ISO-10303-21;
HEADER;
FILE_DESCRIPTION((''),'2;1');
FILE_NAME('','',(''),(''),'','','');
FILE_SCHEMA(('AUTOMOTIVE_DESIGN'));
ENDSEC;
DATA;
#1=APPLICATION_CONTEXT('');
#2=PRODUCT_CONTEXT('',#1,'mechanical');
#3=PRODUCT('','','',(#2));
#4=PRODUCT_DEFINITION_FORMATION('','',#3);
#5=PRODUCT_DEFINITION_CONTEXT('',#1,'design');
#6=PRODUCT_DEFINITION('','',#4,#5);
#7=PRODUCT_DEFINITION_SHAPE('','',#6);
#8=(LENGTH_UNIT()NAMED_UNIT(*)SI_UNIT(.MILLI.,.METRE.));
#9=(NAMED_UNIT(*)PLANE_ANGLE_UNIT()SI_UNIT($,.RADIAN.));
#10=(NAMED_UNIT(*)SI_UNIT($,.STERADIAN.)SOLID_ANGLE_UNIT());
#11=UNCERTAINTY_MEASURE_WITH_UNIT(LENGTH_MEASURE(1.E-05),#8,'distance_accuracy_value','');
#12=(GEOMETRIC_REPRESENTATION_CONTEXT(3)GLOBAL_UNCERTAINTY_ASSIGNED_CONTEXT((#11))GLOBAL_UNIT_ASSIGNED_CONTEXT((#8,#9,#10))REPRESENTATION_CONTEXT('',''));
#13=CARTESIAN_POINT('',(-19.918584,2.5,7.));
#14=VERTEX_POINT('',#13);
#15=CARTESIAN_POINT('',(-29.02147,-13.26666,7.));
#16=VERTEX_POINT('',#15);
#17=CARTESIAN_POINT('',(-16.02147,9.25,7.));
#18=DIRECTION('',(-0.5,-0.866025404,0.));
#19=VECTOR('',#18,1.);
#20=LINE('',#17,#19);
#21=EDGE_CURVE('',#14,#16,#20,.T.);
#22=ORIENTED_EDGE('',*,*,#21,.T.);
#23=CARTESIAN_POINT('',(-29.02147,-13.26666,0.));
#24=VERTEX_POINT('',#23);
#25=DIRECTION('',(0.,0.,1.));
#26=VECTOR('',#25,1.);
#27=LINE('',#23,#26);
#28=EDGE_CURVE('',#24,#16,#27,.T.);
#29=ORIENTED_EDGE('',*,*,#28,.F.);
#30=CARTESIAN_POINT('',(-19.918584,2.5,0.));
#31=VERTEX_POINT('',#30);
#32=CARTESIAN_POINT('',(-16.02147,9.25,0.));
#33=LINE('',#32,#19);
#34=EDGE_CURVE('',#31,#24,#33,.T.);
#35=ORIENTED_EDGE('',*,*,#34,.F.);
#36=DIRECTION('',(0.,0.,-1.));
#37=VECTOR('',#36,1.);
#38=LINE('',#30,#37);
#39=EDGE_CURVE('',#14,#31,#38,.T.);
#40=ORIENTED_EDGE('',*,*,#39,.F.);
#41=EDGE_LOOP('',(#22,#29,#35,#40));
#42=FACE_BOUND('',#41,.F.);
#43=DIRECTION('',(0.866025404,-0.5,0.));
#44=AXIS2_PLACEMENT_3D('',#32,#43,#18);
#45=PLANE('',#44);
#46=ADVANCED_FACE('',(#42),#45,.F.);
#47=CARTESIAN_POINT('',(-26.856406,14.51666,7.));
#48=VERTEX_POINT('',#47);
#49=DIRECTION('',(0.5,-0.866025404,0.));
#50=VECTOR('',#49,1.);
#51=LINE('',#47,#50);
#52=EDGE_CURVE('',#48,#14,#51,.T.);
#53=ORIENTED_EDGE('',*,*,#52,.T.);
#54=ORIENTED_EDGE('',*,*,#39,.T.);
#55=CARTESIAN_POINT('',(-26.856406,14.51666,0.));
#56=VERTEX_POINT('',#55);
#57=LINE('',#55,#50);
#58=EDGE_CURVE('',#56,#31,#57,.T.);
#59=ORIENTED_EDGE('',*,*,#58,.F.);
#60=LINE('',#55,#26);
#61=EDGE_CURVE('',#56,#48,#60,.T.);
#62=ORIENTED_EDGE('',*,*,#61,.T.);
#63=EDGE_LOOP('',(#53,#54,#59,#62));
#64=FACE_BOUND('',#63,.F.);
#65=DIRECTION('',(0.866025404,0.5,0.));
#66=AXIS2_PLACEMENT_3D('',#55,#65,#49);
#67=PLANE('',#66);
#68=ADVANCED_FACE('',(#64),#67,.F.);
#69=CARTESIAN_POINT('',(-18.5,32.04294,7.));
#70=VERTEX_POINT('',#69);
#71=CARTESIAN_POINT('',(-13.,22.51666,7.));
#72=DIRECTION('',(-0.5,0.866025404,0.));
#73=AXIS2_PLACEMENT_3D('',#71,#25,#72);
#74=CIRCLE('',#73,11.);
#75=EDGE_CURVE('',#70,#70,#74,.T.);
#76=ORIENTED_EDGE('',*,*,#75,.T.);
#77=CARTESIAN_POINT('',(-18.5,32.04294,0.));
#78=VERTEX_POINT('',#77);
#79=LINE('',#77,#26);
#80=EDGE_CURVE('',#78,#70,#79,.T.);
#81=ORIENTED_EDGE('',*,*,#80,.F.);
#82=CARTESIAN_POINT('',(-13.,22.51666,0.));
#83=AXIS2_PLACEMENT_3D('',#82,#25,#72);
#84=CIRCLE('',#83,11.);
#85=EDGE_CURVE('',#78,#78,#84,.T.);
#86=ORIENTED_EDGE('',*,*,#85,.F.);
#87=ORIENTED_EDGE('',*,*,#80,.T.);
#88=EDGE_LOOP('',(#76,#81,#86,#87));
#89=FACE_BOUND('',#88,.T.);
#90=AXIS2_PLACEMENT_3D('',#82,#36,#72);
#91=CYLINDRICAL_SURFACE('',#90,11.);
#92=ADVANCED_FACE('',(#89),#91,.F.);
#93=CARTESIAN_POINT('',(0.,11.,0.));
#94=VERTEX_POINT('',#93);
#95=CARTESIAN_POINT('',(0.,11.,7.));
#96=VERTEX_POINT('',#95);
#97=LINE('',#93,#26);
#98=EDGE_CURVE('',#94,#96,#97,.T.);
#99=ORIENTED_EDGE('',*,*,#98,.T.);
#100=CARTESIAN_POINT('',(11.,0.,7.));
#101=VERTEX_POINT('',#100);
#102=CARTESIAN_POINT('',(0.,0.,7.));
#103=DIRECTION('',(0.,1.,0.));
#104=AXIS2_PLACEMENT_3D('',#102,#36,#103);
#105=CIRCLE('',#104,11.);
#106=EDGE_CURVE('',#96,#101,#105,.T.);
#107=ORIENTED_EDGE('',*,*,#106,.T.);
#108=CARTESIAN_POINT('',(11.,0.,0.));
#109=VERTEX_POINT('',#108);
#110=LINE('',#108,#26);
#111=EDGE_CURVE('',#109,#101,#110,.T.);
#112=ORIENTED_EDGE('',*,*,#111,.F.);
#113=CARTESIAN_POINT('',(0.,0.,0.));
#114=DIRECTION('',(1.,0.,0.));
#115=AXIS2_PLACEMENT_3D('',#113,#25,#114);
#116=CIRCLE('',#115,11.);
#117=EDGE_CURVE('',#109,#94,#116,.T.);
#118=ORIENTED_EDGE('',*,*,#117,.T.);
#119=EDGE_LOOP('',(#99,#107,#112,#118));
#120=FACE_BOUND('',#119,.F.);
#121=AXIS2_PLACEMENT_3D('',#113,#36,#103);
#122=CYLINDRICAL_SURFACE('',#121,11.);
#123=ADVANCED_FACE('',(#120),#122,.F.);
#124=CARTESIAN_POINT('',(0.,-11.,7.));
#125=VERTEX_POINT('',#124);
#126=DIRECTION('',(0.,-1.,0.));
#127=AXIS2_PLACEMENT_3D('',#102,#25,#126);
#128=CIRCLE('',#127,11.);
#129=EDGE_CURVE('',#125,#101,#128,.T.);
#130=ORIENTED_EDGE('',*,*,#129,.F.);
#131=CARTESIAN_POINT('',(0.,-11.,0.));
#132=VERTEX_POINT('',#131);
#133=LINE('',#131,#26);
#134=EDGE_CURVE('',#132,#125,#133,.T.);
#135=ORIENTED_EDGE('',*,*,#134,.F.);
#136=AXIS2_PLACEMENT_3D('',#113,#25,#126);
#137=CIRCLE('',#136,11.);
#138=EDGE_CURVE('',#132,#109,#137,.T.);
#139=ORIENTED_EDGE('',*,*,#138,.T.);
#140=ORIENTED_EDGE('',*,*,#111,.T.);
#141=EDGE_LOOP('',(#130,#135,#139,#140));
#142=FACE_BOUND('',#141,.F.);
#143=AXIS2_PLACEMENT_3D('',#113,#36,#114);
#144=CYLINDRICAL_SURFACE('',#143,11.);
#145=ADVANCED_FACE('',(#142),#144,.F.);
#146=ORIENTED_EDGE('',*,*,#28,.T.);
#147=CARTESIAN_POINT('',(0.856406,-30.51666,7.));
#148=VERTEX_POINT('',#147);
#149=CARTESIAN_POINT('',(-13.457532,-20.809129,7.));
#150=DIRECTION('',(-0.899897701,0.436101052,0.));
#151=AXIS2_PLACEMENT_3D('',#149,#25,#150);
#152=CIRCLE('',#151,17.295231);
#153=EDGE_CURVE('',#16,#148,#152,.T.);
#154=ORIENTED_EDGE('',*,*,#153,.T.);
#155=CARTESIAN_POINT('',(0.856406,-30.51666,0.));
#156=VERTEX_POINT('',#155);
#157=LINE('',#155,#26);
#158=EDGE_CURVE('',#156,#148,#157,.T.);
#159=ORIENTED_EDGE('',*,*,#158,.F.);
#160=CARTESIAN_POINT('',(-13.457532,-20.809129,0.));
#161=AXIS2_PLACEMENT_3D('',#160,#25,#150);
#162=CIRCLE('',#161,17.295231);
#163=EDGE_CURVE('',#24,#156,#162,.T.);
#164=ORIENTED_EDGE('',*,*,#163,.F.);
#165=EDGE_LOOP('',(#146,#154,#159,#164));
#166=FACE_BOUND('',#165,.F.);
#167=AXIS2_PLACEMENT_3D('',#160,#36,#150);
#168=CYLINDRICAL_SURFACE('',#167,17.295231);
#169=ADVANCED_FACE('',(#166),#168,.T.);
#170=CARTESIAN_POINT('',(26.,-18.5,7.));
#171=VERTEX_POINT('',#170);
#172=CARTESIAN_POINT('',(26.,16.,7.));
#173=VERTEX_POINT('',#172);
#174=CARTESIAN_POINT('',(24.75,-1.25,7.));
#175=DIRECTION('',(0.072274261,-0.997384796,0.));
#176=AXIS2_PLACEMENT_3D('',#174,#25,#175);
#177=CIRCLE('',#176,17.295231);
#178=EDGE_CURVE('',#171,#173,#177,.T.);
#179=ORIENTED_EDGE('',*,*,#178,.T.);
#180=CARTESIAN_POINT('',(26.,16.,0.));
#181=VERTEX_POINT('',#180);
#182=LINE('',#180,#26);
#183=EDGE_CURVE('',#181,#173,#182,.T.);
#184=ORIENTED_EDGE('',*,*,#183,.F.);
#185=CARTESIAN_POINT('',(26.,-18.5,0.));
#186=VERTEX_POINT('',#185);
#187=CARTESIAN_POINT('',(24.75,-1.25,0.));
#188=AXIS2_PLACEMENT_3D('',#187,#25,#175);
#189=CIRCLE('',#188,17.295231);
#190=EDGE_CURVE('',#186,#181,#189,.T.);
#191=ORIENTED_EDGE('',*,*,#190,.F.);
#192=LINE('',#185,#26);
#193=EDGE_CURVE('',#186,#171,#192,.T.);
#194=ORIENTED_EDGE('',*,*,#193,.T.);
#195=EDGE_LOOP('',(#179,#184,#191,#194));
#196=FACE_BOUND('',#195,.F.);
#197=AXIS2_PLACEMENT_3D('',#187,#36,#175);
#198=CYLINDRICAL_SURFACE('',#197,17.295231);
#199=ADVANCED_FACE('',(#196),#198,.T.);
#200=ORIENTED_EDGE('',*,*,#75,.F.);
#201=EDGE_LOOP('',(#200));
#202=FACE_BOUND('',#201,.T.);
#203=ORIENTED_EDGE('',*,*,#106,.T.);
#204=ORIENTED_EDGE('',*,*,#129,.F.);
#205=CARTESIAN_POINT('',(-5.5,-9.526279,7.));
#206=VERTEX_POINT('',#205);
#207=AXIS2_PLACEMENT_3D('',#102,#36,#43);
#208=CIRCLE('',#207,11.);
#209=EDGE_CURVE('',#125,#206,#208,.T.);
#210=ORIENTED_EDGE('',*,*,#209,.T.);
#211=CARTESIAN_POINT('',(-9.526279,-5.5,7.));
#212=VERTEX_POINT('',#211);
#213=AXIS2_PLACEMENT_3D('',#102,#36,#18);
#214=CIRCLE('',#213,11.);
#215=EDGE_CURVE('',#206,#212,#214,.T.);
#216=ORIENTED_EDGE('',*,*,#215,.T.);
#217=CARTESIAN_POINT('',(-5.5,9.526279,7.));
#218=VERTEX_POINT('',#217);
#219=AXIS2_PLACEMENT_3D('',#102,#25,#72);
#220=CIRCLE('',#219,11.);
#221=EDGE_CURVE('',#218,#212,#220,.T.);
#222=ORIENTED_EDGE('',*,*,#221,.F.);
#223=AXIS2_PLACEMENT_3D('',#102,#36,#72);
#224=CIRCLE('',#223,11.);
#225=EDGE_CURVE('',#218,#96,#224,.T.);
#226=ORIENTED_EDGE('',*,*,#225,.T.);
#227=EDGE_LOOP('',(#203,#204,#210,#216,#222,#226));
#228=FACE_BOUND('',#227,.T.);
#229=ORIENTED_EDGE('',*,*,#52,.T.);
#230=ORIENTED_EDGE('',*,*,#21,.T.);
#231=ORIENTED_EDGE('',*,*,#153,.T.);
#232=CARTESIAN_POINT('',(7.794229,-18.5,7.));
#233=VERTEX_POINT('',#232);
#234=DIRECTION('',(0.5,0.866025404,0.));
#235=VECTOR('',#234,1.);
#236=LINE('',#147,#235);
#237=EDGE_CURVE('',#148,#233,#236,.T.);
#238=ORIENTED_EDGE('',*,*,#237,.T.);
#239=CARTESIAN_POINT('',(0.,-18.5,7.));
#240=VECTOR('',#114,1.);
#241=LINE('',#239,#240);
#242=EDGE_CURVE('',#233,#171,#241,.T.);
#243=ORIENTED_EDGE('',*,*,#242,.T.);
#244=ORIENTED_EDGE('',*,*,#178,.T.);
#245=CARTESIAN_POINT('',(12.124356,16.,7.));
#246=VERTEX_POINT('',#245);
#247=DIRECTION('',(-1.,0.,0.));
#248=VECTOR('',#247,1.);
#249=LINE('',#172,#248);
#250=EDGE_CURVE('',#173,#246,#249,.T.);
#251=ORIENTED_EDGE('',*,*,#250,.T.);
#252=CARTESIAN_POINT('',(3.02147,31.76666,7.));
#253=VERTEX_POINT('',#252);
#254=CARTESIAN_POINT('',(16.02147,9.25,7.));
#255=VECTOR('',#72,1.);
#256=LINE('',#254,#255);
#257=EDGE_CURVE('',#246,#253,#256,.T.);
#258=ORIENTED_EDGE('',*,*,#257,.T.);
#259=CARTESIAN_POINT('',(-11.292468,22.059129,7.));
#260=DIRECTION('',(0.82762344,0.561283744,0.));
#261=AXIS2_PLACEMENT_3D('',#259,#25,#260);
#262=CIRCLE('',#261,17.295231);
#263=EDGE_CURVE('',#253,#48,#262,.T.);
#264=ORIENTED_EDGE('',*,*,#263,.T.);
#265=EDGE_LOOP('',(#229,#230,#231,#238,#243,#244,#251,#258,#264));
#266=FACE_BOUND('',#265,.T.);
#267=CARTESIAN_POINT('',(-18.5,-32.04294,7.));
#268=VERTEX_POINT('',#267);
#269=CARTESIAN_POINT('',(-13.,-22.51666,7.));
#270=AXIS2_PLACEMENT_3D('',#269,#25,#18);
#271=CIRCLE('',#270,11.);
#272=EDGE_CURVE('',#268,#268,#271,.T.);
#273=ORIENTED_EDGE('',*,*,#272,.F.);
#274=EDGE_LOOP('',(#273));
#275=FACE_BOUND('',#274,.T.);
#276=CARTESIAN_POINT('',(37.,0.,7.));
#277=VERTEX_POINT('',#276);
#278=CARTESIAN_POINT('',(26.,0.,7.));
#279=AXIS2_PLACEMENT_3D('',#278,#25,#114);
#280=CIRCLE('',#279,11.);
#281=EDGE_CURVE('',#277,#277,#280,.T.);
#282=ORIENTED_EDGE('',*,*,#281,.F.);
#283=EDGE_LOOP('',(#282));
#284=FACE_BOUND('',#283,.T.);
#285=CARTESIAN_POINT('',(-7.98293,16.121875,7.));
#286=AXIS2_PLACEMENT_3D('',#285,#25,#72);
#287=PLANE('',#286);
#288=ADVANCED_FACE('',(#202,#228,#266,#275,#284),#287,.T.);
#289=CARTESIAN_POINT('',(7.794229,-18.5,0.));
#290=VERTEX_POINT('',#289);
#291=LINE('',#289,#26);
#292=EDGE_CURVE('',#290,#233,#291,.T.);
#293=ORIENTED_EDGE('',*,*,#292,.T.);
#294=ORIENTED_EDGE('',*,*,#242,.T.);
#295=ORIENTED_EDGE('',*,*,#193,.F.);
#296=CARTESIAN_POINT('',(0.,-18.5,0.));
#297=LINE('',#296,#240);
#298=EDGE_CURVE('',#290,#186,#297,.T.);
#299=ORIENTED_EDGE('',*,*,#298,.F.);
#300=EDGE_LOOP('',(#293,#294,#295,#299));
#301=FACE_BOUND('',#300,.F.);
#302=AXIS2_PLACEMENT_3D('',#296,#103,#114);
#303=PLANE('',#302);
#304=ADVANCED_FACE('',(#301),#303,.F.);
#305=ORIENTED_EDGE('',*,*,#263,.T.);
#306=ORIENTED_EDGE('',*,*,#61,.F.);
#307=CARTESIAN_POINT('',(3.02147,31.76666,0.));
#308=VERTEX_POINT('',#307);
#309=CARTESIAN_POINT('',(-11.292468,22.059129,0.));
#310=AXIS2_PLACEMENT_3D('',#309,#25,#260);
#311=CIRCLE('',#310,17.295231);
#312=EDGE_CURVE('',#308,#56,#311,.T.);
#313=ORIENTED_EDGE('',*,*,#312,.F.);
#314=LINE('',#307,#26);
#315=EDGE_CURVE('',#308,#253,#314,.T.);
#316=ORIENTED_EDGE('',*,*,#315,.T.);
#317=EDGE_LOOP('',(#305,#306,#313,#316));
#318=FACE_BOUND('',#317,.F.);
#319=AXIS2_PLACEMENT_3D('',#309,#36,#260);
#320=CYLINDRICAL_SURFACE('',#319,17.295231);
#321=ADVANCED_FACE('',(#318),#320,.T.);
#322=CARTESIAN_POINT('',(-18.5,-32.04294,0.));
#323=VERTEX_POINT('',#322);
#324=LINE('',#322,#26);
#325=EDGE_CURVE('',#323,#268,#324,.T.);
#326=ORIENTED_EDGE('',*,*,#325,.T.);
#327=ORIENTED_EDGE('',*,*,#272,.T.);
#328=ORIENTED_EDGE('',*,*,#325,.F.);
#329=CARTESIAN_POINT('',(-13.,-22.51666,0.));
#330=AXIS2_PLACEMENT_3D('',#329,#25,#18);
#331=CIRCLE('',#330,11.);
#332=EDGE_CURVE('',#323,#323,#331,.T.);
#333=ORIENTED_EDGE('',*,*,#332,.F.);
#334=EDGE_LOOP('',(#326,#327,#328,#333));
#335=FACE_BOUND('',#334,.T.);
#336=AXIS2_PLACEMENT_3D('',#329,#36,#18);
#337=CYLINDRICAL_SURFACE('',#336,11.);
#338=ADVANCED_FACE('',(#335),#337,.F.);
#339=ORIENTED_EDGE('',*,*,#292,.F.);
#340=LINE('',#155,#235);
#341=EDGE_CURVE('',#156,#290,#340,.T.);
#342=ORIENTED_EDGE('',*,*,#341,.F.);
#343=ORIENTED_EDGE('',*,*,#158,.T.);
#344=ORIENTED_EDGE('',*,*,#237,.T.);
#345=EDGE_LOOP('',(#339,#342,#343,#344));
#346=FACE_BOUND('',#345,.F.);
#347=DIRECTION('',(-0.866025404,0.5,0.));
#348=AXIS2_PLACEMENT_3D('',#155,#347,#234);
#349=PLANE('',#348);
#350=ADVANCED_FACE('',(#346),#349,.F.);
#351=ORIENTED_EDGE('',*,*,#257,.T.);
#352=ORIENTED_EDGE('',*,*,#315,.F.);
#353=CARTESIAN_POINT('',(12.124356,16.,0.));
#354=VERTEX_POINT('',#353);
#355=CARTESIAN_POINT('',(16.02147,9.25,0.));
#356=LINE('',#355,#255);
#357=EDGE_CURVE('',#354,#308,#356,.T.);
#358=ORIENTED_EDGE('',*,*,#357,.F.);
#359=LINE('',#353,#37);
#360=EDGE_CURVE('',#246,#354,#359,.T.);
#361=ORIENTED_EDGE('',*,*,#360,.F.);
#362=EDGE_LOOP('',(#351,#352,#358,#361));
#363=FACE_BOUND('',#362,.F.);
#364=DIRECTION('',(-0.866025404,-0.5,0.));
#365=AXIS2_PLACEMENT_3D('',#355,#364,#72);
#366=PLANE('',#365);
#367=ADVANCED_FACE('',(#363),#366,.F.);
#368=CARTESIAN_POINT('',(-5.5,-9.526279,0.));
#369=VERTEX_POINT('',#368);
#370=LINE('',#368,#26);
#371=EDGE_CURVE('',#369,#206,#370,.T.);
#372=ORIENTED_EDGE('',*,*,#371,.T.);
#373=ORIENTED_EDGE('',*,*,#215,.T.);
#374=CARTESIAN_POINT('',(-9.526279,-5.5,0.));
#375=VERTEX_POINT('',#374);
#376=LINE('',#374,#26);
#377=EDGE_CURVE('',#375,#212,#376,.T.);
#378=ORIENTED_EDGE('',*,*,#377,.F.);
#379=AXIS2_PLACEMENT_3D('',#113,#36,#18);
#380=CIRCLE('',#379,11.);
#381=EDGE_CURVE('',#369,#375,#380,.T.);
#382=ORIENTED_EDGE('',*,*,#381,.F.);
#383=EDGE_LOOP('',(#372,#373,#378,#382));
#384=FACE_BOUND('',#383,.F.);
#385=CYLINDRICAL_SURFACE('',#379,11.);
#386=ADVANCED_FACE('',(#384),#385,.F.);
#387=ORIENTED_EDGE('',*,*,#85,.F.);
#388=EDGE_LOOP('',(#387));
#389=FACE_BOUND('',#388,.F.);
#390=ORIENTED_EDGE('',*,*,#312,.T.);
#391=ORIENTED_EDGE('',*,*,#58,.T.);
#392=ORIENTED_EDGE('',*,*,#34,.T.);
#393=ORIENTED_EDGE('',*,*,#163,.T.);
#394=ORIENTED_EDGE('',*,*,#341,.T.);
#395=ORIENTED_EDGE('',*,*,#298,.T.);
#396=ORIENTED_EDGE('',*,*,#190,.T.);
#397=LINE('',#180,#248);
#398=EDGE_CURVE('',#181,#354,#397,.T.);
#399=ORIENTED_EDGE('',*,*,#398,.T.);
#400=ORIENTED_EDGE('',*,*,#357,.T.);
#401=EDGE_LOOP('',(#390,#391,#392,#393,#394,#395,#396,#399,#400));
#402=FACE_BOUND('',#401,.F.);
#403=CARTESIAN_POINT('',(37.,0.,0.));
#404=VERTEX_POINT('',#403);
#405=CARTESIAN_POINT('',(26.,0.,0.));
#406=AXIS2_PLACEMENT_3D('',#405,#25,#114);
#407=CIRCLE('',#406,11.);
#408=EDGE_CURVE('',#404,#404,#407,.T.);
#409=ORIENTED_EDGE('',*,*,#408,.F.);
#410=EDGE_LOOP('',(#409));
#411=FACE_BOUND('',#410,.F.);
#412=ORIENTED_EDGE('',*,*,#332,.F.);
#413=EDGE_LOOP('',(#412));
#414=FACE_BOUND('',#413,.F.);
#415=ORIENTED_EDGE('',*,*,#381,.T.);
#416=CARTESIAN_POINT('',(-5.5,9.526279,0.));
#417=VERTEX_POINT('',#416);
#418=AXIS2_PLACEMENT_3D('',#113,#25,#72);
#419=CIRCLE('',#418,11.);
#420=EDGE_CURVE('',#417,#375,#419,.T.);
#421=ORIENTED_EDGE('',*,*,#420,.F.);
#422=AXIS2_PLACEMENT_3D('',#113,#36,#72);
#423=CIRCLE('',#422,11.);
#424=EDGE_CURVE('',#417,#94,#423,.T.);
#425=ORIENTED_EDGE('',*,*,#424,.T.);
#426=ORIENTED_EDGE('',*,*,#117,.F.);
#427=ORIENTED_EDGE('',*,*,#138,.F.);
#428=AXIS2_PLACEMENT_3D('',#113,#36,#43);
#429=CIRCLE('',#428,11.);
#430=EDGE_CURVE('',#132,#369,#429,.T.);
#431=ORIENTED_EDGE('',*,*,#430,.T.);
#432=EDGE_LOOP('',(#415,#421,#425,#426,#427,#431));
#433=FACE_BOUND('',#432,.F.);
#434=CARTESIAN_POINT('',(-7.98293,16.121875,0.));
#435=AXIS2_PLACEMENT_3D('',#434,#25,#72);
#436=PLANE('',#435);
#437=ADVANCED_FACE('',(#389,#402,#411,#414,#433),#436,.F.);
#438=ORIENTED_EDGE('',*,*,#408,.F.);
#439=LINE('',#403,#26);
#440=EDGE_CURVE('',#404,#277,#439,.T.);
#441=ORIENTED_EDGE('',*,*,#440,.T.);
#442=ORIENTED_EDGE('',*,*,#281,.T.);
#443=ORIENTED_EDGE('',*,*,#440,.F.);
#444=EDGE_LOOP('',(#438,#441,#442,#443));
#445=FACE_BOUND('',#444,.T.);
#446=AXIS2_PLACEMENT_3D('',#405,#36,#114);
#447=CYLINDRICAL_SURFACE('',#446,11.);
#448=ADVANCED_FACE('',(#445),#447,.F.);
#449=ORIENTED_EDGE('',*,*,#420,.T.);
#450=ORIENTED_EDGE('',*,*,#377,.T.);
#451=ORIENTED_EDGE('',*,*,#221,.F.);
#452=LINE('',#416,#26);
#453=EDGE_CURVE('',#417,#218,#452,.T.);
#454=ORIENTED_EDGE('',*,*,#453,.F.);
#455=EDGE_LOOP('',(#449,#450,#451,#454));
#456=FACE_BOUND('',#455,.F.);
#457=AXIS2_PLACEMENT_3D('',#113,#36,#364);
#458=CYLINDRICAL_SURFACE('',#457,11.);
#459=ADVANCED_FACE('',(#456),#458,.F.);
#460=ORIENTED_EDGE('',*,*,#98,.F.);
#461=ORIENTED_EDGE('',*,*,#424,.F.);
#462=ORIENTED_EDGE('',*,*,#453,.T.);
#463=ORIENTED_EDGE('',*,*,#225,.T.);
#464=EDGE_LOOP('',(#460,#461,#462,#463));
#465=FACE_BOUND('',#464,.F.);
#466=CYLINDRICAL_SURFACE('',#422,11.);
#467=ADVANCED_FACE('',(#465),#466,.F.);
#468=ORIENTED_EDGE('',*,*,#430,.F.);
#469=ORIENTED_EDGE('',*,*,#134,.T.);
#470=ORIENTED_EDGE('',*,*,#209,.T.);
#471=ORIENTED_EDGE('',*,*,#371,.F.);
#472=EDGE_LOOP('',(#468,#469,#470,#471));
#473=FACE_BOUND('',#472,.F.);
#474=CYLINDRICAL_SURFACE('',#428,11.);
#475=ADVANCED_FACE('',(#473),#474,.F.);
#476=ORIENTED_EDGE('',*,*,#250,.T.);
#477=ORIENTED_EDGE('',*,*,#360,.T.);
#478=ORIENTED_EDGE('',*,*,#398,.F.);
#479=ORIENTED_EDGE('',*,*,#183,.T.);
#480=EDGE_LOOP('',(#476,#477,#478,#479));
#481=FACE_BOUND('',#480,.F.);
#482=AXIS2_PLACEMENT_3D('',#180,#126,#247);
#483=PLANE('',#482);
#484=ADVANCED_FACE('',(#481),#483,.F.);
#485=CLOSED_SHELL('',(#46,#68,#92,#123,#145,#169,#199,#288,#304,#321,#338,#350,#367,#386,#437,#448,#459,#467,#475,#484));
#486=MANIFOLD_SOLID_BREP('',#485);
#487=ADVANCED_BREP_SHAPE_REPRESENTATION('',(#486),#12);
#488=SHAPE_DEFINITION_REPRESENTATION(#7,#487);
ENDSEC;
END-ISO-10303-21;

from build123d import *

# Parameters (mm, degrees)
F0_R            = 11
F1_DEPTH        = 7
F1_COPIES_COUNT = 3


# Not quite as in the source:
# - a pattern or mirror of a feature is missing from the dataset's text; its kind, count and spacing are read off the source's solid


with BuildPart() as f1:
    # F0 (on Top) → F1 (new body)
    with BuildSketch(Plane.XY):
        with BuildLine():
            ThreePointArc((0, 11), (7.7781745931, 7.7781745931), (11, 0))
            ThreePointArc((11, 0), (7.7781745931, -7.7781745931), (0, -11))
            Line((0, -11), (0, -18.5))
            Line((0, -18.5), (26, -18.5))
            ThreePointArc((26, -18.5), (42.0452305564, -1.25), (26, 16))
            Line((26, 16), (0, 16))
            Line((0, 16), (0, 11))
        make_face()
        with Locations((26, 0)):
            Circle(F0_R, mode=Mode.SUBTRACT)
    extrude(amount=F1_DEPTH)

    # F1_copies: F1 ×3 about axis
    f1_copies_axis = Axis((0, 0, 0), (0, 0, 1))


with BuildPart() as f1_1:
    add(f1.part)
    for i in range(1, F1_COPIES_COUNT):
        add(f1.part.rotate(f1_copies_axis, i * 360 / F1_COPIES_COUNT))


solid = f1_1.part
